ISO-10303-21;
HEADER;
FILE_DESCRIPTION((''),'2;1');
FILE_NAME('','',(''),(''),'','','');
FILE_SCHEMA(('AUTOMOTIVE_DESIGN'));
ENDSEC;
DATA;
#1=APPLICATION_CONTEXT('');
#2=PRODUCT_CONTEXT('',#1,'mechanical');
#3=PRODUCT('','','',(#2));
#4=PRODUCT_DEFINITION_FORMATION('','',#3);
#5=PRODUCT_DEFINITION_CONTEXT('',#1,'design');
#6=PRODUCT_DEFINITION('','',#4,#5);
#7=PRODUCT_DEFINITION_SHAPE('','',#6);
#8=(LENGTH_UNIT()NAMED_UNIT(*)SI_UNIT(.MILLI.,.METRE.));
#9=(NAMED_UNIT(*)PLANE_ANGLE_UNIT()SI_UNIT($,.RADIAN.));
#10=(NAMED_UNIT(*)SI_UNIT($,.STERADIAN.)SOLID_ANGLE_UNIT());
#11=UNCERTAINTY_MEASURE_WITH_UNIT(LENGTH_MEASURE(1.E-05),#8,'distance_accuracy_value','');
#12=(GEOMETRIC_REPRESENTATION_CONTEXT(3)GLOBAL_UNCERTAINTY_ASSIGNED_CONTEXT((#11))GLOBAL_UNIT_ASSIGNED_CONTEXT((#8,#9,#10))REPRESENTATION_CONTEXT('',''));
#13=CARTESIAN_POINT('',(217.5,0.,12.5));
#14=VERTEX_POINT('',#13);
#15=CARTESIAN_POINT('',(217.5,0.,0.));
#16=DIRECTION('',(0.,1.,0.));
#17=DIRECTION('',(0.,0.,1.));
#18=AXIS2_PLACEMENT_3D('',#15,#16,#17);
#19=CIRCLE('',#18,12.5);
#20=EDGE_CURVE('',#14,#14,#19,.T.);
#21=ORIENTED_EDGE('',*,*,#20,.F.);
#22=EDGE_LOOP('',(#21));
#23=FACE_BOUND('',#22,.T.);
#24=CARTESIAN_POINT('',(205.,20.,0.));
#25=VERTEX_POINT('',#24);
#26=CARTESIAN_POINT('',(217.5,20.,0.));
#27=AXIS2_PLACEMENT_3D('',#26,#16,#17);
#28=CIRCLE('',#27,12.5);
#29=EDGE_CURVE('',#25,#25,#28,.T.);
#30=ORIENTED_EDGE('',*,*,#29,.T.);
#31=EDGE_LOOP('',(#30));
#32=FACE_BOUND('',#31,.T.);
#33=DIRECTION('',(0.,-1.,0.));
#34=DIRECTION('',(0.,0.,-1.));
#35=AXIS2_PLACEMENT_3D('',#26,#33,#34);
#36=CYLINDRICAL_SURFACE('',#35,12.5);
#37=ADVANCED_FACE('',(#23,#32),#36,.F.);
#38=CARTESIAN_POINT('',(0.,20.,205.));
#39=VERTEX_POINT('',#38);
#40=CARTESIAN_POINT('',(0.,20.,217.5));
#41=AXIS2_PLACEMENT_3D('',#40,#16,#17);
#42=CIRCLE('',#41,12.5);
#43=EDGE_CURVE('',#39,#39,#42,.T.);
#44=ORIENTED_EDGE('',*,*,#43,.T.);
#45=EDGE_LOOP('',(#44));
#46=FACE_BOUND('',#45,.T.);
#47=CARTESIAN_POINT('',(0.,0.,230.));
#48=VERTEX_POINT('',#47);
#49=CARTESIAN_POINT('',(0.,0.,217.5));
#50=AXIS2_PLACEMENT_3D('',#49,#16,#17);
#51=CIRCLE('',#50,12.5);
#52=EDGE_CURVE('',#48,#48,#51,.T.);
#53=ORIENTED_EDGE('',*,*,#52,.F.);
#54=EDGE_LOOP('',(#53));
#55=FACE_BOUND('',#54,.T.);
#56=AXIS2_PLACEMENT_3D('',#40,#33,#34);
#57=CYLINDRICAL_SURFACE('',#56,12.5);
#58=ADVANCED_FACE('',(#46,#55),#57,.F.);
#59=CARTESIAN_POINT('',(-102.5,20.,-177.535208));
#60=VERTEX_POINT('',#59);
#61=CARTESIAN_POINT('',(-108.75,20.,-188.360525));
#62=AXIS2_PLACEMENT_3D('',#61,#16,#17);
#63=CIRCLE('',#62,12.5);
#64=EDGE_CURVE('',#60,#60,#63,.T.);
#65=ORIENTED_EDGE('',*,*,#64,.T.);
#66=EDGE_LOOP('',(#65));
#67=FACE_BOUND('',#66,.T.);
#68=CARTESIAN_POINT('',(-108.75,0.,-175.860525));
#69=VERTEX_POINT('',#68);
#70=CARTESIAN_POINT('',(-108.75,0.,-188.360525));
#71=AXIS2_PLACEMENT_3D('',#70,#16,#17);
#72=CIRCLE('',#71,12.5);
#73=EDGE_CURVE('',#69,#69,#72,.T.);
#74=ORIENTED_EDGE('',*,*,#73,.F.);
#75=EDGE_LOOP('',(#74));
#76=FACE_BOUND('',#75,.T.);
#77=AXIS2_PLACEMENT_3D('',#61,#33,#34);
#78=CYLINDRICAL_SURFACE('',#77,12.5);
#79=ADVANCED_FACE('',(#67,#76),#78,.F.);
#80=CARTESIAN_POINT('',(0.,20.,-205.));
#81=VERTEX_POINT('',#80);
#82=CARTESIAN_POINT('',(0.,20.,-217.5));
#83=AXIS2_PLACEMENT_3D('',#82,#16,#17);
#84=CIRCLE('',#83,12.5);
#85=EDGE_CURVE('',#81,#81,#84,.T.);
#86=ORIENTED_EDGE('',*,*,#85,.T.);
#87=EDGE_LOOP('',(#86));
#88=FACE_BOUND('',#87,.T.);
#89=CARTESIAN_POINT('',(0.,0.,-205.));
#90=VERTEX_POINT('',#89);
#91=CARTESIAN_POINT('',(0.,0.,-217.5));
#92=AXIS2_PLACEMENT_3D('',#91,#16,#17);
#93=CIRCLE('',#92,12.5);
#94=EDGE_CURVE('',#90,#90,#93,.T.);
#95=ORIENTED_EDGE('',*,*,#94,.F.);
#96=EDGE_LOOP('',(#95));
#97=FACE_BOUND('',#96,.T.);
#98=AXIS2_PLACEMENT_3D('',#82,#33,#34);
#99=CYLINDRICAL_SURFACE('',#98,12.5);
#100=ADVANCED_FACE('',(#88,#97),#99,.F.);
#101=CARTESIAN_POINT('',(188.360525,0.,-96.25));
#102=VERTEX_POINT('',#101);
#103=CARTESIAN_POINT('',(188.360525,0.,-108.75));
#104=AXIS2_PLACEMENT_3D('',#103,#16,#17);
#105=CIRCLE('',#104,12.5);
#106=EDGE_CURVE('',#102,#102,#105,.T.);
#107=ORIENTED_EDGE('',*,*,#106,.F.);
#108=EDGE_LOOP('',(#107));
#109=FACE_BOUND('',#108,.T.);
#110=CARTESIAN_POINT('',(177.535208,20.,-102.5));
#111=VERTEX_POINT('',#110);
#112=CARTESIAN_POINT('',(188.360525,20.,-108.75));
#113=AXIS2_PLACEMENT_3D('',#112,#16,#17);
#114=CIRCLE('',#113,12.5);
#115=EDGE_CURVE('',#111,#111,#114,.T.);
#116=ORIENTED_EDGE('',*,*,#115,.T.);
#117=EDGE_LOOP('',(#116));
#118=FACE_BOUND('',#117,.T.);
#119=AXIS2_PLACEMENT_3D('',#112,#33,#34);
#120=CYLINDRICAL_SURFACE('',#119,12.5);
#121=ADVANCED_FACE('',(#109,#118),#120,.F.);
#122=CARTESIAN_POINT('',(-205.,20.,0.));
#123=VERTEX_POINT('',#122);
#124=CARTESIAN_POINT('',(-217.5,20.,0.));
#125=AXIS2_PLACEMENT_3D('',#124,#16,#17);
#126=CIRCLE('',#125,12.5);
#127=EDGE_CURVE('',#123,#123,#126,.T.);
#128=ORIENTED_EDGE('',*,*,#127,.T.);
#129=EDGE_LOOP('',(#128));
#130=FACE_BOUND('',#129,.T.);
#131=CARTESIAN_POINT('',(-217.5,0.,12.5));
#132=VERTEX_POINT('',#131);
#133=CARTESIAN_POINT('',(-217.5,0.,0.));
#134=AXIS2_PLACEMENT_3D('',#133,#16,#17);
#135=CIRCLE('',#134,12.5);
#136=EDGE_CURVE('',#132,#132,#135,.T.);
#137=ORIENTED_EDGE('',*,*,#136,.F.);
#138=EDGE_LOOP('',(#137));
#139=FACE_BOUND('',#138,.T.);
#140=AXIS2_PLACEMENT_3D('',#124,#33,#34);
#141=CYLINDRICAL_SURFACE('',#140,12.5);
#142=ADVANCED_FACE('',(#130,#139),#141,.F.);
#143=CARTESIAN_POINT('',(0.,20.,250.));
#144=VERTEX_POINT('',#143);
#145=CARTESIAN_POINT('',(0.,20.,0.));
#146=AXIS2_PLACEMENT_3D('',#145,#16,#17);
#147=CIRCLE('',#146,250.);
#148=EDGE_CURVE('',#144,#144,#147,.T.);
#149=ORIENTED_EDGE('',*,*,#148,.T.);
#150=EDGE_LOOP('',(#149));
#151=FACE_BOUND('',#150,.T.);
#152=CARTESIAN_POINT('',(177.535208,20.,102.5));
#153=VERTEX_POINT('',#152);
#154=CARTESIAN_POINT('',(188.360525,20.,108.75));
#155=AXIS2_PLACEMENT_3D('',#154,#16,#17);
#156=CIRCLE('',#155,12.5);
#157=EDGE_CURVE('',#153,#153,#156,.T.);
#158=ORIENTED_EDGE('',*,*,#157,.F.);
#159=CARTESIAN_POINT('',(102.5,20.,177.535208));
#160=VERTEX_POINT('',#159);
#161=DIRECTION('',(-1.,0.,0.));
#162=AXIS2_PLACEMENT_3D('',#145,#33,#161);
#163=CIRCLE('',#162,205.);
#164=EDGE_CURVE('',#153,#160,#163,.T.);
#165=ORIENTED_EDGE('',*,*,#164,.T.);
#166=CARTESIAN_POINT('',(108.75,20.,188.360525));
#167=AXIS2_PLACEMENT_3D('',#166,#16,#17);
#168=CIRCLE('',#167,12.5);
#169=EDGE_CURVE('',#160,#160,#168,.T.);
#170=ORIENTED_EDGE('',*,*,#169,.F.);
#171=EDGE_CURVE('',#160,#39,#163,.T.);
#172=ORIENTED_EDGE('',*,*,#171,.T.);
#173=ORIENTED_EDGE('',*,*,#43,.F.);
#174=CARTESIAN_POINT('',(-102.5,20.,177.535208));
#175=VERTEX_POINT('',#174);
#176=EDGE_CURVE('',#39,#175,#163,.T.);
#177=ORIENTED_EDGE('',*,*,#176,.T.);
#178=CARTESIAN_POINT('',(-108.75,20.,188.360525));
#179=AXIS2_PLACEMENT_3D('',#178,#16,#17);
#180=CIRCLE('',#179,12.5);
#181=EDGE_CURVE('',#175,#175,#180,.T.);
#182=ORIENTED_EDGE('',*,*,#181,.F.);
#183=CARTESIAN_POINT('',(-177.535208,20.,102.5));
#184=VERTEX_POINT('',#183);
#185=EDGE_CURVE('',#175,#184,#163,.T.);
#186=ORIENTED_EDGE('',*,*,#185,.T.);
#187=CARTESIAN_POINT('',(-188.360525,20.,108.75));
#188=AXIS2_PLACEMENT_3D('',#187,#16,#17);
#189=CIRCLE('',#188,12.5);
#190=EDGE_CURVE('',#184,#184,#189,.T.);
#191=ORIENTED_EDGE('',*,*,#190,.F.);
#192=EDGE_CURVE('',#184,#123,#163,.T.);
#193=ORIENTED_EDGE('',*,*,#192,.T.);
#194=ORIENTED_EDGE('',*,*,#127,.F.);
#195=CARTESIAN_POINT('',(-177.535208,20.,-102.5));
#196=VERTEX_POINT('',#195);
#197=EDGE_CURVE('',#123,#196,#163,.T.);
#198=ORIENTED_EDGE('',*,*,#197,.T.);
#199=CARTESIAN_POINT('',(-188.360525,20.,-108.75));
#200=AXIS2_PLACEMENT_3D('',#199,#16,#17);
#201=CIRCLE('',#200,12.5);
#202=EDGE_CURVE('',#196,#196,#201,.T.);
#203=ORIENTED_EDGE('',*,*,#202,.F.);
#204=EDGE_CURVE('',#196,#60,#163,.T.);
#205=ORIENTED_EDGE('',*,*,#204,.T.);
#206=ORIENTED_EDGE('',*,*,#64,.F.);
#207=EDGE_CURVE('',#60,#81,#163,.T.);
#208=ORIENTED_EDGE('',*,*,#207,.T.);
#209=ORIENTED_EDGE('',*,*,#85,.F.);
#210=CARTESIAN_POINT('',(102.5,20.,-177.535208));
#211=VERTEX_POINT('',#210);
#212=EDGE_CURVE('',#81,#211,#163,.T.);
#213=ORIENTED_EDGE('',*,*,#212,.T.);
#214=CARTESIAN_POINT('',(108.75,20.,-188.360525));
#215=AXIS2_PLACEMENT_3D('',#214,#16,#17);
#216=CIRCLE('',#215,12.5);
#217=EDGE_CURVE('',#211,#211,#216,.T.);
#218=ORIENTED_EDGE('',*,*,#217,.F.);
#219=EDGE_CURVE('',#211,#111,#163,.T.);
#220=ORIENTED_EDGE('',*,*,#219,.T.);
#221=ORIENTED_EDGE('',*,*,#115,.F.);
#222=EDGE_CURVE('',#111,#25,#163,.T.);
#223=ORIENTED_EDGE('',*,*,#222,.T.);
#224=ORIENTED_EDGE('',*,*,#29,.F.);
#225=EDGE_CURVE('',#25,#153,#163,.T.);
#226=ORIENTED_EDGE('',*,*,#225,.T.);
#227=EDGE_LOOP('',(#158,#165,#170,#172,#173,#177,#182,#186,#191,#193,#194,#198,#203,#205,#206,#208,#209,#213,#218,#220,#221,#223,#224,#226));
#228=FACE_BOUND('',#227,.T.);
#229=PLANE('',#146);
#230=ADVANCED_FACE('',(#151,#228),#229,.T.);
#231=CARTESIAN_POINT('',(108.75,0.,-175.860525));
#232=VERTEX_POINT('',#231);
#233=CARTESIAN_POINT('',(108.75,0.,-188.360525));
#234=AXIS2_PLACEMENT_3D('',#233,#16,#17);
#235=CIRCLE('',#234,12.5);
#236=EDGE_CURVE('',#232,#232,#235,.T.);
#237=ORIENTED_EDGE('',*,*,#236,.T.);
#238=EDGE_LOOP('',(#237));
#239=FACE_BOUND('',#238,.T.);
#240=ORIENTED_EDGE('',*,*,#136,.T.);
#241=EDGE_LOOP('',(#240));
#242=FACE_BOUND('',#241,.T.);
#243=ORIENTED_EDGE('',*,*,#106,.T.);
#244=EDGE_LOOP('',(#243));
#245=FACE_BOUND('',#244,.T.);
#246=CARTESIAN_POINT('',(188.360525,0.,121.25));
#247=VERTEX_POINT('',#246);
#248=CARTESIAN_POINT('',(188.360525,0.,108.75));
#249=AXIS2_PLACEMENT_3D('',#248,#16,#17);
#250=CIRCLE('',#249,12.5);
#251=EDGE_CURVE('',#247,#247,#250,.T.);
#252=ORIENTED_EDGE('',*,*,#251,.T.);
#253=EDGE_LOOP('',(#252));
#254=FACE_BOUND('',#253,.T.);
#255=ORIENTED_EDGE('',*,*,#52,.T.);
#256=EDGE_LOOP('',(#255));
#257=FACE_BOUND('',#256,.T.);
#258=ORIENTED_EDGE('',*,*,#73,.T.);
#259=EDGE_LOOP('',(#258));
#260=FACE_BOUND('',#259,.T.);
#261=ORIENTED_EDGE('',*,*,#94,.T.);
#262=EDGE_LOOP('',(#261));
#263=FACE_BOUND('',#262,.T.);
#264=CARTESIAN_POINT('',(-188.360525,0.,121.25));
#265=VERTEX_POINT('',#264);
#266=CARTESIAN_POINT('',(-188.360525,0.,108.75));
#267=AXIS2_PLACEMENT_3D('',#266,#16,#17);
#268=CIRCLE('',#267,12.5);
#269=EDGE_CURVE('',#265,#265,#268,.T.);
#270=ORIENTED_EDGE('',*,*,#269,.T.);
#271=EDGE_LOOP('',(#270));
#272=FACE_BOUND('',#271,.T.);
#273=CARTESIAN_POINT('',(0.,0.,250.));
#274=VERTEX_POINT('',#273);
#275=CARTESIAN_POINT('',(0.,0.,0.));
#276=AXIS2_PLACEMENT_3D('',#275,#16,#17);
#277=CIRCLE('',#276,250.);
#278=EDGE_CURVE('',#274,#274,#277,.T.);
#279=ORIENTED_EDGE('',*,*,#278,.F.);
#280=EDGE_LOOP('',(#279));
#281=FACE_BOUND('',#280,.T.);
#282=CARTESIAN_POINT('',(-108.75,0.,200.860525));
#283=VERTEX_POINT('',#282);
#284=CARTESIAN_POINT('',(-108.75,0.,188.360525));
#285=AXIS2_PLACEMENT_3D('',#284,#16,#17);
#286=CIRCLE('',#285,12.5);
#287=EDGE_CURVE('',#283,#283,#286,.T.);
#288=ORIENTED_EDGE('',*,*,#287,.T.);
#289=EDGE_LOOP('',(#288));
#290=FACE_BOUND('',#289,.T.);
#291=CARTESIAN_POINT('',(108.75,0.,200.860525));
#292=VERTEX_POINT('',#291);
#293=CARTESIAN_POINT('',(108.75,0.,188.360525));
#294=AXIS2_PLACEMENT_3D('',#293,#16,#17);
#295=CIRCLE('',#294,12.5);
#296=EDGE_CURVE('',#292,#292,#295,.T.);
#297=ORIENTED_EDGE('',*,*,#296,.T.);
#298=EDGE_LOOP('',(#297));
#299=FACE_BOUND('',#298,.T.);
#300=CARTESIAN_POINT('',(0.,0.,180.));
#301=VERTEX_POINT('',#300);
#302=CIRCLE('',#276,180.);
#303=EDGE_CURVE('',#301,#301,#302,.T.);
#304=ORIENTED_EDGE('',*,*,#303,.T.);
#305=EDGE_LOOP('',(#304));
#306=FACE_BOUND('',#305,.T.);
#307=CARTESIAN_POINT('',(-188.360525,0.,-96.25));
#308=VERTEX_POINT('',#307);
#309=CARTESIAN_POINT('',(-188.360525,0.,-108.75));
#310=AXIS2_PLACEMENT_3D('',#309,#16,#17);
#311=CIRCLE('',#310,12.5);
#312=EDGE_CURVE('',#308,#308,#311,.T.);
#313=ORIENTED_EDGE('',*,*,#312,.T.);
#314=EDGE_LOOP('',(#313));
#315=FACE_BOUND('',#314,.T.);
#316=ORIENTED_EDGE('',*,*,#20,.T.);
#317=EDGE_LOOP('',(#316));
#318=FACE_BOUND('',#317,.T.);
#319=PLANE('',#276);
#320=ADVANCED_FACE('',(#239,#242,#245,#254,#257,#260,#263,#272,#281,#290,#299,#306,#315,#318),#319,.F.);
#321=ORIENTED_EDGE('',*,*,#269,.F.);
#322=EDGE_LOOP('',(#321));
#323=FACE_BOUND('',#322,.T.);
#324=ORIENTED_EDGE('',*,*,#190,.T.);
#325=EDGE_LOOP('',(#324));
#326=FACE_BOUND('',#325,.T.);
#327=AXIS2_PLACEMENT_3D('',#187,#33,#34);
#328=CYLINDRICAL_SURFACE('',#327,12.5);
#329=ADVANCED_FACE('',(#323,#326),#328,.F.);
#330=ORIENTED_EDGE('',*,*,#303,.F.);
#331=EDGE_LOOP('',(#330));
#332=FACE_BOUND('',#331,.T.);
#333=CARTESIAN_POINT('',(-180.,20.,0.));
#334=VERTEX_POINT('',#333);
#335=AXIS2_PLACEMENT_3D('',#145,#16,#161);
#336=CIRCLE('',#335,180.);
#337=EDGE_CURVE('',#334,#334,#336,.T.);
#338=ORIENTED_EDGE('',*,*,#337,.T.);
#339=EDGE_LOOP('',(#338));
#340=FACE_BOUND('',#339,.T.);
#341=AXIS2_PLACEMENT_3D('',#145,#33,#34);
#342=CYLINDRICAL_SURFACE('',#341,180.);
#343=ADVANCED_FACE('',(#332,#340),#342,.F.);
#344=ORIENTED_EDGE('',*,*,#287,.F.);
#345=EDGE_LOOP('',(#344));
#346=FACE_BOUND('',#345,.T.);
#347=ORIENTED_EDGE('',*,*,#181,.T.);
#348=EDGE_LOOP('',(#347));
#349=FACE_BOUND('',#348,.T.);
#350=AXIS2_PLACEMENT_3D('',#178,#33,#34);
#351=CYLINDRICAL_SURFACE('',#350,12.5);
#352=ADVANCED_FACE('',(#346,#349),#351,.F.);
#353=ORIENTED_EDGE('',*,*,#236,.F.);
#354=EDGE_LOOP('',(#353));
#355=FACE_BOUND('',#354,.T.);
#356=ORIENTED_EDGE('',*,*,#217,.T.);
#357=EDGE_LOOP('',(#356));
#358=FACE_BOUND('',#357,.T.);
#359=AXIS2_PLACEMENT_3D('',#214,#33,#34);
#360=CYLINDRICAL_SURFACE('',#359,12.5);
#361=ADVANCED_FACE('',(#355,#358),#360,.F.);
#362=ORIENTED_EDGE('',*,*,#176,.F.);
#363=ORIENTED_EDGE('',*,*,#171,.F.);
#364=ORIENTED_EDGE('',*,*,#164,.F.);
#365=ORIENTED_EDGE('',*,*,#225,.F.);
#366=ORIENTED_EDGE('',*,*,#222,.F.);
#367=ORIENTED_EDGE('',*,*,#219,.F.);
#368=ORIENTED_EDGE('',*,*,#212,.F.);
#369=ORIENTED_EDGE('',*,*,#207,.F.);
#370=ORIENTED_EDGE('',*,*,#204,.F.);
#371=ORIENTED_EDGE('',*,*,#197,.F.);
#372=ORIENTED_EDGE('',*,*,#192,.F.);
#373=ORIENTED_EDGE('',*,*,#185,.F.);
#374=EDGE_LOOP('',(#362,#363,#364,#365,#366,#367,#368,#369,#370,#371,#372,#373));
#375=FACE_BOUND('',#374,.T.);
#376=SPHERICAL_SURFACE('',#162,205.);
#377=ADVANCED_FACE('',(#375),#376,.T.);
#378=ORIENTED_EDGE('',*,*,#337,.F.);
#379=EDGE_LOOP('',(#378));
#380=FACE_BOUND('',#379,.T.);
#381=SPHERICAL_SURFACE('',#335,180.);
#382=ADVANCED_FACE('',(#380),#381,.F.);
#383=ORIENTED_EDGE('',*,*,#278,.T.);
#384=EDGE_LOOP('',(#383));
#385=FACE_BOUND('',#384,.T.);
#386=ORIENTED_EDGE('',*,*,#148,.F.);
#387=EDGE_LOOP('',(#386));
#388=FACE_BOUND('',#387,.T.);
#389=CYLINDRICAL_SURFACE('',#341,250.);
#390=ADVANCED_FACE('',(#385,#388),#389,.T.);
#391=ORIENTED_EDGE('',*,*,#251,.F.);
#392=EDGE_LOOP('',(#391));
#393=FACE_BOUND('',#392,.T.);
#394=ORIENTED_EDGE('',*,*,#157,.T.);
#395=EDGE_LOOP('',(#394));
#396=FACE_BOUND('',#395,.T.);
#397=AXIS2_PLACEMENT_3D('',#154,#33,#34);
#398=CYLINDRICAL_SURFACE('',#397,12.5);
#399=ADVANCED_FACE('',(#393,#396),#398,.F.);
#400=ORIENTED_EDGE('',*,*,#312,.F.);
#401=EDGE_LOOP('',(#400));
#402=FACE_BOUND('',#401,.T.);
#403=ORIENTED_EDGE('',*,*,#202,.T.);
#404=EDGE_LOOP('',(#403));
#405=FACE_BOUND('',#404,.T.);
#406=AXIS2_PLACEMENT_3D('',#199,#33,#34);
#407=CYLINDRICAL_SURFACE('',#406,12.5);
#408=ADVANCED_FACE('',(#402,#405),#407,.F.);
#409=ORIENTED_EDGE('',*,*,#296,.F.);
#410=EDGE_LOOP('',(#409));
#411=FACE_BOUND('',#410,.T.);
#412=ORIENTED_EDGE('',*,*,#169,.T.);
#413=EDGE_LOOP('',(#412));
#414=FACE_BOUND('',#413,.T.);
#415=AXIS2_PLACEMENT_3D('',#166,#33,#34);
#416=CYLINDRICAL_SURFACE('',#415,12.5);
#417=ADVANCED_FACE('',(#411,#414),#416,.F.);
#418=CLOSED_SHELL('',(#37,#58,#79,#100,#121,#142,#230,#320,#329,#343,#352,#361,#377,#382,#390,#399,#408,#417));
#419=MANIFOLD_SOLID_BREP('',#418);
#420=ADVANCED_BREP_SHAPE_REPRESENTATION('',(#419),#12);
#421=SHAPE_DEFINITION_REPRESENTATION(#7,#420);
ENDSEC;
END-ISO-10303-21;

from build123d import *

# Parameters (mm, degrees)
SKETCH1_R           = 250
SKETCH1_R_2         = 180
SKETCH1_R_3         = 12.5
BOSS_EXTRUDE1_DEPTH = 20


# Read off the part's stored shape, not the designer's step: Revolve1
with BuildPart() as part:
    # Sketch1 → Boss-Extrude1 (new body)
    with BuildSketch(Plane(origin=(0, 0, 0), x_dir=(1, 0, 0), z_dir=(0, 1, 0))):
        with Locations(Location((0, 0, 0), (0, 0, 270))):
            Circle(SKETCH1_R)
        with Locations(Location((0, 0, 0), (0, 0, 270))):
            Circle(SKETCH1_R_2, mode=Mode.SUBTRACT)
        with Locations(Location((0, 217.5, 0), (0, 0, 270))):
            Circle(SKETCH1_R_3, mode=Mode.SUBTRACT)
        with Locations(Location((108.75, 188.360525323, 0), (0, 0, 270))):
            Circle(SKETCH1_R_3, mode=Mode.SUBTRACT)
        with Locations(Location((188.360525323, 108.75, 0), (0, 0, 270))):
            Circle(SKETCH1_R_3, mode=Mode.SUBTRACT)
        with Locations(Location((217.5, 0, 0), (0, 0, 270))):
            Circle(SKETCH1_R_3, mode=Mode.SUBTRACT)
        with Locations(Location((188.360525323, -108.75, 0), (0, 0, 270))):
            Circle(SKETCH1_R_3, mode=Mode.SUBTRACT)
        with Locations(Location((108.75, -188.360525323, 0), (0, 0, 270))):
            Circle(SKETCH1_R_3, mode=Mode.SUBTRACT)
        with Locations(Location((0, -217.5, 0), (0, 0, 270))):
            Circle(SKETCH1_R_3, mode=Mode.SUBTRACT)
        with Locations(Location((-108.75, -188.360525323, 0), (0, 0, 270))):
            Circle(SKETCH1_R_3, mode=Mode.SUBTRACT)
        with Locations(Location((-188.360525323, -108.75, 0), (0, 0, 270))):
            Circle(SKETCH1_R_3, mode=Mode.SUBTRACT)
        with Locations(Location((-217.5, 0, 0), (0, 0, 270))):
            Circle(SKETCH1_R_3, mode=Mode.SUBTRACT)
        with Locations(Location((-188.360525323, 108.75, 0), (0, 0, 270))):
            Circle(SKETCH1_R_3, mode=Mode.SUBTRACT)
        with Locations(Location((-108.75, 188.360525323, 0), (0, 0, 270))):
            Circle(SKETCH1_R_3, mode=Mode.SUBTRACT)
    extrude(amount=BOSS_EXTRUDE1_DEPTH)

    # Revolve1 outline → Revolve1 (revolve)
    with BuildSketch(Plane.XY):
        with BuildLine():
            ThreePointArc((205, 19.9999999), (144.956890179, 164.956890108), (0, 225))
            Line((0, 225), (0, 200))
            ThreePointArc((0, 200), (127.279220649, 147.279220578), (180, 19.9999999))
            Line((180, 19.9999999), (205, 19.9999999))
        make_face()
    revolve(axis=Axis((0, 0, 0), (0, 1, 0)))


solid = part.part
